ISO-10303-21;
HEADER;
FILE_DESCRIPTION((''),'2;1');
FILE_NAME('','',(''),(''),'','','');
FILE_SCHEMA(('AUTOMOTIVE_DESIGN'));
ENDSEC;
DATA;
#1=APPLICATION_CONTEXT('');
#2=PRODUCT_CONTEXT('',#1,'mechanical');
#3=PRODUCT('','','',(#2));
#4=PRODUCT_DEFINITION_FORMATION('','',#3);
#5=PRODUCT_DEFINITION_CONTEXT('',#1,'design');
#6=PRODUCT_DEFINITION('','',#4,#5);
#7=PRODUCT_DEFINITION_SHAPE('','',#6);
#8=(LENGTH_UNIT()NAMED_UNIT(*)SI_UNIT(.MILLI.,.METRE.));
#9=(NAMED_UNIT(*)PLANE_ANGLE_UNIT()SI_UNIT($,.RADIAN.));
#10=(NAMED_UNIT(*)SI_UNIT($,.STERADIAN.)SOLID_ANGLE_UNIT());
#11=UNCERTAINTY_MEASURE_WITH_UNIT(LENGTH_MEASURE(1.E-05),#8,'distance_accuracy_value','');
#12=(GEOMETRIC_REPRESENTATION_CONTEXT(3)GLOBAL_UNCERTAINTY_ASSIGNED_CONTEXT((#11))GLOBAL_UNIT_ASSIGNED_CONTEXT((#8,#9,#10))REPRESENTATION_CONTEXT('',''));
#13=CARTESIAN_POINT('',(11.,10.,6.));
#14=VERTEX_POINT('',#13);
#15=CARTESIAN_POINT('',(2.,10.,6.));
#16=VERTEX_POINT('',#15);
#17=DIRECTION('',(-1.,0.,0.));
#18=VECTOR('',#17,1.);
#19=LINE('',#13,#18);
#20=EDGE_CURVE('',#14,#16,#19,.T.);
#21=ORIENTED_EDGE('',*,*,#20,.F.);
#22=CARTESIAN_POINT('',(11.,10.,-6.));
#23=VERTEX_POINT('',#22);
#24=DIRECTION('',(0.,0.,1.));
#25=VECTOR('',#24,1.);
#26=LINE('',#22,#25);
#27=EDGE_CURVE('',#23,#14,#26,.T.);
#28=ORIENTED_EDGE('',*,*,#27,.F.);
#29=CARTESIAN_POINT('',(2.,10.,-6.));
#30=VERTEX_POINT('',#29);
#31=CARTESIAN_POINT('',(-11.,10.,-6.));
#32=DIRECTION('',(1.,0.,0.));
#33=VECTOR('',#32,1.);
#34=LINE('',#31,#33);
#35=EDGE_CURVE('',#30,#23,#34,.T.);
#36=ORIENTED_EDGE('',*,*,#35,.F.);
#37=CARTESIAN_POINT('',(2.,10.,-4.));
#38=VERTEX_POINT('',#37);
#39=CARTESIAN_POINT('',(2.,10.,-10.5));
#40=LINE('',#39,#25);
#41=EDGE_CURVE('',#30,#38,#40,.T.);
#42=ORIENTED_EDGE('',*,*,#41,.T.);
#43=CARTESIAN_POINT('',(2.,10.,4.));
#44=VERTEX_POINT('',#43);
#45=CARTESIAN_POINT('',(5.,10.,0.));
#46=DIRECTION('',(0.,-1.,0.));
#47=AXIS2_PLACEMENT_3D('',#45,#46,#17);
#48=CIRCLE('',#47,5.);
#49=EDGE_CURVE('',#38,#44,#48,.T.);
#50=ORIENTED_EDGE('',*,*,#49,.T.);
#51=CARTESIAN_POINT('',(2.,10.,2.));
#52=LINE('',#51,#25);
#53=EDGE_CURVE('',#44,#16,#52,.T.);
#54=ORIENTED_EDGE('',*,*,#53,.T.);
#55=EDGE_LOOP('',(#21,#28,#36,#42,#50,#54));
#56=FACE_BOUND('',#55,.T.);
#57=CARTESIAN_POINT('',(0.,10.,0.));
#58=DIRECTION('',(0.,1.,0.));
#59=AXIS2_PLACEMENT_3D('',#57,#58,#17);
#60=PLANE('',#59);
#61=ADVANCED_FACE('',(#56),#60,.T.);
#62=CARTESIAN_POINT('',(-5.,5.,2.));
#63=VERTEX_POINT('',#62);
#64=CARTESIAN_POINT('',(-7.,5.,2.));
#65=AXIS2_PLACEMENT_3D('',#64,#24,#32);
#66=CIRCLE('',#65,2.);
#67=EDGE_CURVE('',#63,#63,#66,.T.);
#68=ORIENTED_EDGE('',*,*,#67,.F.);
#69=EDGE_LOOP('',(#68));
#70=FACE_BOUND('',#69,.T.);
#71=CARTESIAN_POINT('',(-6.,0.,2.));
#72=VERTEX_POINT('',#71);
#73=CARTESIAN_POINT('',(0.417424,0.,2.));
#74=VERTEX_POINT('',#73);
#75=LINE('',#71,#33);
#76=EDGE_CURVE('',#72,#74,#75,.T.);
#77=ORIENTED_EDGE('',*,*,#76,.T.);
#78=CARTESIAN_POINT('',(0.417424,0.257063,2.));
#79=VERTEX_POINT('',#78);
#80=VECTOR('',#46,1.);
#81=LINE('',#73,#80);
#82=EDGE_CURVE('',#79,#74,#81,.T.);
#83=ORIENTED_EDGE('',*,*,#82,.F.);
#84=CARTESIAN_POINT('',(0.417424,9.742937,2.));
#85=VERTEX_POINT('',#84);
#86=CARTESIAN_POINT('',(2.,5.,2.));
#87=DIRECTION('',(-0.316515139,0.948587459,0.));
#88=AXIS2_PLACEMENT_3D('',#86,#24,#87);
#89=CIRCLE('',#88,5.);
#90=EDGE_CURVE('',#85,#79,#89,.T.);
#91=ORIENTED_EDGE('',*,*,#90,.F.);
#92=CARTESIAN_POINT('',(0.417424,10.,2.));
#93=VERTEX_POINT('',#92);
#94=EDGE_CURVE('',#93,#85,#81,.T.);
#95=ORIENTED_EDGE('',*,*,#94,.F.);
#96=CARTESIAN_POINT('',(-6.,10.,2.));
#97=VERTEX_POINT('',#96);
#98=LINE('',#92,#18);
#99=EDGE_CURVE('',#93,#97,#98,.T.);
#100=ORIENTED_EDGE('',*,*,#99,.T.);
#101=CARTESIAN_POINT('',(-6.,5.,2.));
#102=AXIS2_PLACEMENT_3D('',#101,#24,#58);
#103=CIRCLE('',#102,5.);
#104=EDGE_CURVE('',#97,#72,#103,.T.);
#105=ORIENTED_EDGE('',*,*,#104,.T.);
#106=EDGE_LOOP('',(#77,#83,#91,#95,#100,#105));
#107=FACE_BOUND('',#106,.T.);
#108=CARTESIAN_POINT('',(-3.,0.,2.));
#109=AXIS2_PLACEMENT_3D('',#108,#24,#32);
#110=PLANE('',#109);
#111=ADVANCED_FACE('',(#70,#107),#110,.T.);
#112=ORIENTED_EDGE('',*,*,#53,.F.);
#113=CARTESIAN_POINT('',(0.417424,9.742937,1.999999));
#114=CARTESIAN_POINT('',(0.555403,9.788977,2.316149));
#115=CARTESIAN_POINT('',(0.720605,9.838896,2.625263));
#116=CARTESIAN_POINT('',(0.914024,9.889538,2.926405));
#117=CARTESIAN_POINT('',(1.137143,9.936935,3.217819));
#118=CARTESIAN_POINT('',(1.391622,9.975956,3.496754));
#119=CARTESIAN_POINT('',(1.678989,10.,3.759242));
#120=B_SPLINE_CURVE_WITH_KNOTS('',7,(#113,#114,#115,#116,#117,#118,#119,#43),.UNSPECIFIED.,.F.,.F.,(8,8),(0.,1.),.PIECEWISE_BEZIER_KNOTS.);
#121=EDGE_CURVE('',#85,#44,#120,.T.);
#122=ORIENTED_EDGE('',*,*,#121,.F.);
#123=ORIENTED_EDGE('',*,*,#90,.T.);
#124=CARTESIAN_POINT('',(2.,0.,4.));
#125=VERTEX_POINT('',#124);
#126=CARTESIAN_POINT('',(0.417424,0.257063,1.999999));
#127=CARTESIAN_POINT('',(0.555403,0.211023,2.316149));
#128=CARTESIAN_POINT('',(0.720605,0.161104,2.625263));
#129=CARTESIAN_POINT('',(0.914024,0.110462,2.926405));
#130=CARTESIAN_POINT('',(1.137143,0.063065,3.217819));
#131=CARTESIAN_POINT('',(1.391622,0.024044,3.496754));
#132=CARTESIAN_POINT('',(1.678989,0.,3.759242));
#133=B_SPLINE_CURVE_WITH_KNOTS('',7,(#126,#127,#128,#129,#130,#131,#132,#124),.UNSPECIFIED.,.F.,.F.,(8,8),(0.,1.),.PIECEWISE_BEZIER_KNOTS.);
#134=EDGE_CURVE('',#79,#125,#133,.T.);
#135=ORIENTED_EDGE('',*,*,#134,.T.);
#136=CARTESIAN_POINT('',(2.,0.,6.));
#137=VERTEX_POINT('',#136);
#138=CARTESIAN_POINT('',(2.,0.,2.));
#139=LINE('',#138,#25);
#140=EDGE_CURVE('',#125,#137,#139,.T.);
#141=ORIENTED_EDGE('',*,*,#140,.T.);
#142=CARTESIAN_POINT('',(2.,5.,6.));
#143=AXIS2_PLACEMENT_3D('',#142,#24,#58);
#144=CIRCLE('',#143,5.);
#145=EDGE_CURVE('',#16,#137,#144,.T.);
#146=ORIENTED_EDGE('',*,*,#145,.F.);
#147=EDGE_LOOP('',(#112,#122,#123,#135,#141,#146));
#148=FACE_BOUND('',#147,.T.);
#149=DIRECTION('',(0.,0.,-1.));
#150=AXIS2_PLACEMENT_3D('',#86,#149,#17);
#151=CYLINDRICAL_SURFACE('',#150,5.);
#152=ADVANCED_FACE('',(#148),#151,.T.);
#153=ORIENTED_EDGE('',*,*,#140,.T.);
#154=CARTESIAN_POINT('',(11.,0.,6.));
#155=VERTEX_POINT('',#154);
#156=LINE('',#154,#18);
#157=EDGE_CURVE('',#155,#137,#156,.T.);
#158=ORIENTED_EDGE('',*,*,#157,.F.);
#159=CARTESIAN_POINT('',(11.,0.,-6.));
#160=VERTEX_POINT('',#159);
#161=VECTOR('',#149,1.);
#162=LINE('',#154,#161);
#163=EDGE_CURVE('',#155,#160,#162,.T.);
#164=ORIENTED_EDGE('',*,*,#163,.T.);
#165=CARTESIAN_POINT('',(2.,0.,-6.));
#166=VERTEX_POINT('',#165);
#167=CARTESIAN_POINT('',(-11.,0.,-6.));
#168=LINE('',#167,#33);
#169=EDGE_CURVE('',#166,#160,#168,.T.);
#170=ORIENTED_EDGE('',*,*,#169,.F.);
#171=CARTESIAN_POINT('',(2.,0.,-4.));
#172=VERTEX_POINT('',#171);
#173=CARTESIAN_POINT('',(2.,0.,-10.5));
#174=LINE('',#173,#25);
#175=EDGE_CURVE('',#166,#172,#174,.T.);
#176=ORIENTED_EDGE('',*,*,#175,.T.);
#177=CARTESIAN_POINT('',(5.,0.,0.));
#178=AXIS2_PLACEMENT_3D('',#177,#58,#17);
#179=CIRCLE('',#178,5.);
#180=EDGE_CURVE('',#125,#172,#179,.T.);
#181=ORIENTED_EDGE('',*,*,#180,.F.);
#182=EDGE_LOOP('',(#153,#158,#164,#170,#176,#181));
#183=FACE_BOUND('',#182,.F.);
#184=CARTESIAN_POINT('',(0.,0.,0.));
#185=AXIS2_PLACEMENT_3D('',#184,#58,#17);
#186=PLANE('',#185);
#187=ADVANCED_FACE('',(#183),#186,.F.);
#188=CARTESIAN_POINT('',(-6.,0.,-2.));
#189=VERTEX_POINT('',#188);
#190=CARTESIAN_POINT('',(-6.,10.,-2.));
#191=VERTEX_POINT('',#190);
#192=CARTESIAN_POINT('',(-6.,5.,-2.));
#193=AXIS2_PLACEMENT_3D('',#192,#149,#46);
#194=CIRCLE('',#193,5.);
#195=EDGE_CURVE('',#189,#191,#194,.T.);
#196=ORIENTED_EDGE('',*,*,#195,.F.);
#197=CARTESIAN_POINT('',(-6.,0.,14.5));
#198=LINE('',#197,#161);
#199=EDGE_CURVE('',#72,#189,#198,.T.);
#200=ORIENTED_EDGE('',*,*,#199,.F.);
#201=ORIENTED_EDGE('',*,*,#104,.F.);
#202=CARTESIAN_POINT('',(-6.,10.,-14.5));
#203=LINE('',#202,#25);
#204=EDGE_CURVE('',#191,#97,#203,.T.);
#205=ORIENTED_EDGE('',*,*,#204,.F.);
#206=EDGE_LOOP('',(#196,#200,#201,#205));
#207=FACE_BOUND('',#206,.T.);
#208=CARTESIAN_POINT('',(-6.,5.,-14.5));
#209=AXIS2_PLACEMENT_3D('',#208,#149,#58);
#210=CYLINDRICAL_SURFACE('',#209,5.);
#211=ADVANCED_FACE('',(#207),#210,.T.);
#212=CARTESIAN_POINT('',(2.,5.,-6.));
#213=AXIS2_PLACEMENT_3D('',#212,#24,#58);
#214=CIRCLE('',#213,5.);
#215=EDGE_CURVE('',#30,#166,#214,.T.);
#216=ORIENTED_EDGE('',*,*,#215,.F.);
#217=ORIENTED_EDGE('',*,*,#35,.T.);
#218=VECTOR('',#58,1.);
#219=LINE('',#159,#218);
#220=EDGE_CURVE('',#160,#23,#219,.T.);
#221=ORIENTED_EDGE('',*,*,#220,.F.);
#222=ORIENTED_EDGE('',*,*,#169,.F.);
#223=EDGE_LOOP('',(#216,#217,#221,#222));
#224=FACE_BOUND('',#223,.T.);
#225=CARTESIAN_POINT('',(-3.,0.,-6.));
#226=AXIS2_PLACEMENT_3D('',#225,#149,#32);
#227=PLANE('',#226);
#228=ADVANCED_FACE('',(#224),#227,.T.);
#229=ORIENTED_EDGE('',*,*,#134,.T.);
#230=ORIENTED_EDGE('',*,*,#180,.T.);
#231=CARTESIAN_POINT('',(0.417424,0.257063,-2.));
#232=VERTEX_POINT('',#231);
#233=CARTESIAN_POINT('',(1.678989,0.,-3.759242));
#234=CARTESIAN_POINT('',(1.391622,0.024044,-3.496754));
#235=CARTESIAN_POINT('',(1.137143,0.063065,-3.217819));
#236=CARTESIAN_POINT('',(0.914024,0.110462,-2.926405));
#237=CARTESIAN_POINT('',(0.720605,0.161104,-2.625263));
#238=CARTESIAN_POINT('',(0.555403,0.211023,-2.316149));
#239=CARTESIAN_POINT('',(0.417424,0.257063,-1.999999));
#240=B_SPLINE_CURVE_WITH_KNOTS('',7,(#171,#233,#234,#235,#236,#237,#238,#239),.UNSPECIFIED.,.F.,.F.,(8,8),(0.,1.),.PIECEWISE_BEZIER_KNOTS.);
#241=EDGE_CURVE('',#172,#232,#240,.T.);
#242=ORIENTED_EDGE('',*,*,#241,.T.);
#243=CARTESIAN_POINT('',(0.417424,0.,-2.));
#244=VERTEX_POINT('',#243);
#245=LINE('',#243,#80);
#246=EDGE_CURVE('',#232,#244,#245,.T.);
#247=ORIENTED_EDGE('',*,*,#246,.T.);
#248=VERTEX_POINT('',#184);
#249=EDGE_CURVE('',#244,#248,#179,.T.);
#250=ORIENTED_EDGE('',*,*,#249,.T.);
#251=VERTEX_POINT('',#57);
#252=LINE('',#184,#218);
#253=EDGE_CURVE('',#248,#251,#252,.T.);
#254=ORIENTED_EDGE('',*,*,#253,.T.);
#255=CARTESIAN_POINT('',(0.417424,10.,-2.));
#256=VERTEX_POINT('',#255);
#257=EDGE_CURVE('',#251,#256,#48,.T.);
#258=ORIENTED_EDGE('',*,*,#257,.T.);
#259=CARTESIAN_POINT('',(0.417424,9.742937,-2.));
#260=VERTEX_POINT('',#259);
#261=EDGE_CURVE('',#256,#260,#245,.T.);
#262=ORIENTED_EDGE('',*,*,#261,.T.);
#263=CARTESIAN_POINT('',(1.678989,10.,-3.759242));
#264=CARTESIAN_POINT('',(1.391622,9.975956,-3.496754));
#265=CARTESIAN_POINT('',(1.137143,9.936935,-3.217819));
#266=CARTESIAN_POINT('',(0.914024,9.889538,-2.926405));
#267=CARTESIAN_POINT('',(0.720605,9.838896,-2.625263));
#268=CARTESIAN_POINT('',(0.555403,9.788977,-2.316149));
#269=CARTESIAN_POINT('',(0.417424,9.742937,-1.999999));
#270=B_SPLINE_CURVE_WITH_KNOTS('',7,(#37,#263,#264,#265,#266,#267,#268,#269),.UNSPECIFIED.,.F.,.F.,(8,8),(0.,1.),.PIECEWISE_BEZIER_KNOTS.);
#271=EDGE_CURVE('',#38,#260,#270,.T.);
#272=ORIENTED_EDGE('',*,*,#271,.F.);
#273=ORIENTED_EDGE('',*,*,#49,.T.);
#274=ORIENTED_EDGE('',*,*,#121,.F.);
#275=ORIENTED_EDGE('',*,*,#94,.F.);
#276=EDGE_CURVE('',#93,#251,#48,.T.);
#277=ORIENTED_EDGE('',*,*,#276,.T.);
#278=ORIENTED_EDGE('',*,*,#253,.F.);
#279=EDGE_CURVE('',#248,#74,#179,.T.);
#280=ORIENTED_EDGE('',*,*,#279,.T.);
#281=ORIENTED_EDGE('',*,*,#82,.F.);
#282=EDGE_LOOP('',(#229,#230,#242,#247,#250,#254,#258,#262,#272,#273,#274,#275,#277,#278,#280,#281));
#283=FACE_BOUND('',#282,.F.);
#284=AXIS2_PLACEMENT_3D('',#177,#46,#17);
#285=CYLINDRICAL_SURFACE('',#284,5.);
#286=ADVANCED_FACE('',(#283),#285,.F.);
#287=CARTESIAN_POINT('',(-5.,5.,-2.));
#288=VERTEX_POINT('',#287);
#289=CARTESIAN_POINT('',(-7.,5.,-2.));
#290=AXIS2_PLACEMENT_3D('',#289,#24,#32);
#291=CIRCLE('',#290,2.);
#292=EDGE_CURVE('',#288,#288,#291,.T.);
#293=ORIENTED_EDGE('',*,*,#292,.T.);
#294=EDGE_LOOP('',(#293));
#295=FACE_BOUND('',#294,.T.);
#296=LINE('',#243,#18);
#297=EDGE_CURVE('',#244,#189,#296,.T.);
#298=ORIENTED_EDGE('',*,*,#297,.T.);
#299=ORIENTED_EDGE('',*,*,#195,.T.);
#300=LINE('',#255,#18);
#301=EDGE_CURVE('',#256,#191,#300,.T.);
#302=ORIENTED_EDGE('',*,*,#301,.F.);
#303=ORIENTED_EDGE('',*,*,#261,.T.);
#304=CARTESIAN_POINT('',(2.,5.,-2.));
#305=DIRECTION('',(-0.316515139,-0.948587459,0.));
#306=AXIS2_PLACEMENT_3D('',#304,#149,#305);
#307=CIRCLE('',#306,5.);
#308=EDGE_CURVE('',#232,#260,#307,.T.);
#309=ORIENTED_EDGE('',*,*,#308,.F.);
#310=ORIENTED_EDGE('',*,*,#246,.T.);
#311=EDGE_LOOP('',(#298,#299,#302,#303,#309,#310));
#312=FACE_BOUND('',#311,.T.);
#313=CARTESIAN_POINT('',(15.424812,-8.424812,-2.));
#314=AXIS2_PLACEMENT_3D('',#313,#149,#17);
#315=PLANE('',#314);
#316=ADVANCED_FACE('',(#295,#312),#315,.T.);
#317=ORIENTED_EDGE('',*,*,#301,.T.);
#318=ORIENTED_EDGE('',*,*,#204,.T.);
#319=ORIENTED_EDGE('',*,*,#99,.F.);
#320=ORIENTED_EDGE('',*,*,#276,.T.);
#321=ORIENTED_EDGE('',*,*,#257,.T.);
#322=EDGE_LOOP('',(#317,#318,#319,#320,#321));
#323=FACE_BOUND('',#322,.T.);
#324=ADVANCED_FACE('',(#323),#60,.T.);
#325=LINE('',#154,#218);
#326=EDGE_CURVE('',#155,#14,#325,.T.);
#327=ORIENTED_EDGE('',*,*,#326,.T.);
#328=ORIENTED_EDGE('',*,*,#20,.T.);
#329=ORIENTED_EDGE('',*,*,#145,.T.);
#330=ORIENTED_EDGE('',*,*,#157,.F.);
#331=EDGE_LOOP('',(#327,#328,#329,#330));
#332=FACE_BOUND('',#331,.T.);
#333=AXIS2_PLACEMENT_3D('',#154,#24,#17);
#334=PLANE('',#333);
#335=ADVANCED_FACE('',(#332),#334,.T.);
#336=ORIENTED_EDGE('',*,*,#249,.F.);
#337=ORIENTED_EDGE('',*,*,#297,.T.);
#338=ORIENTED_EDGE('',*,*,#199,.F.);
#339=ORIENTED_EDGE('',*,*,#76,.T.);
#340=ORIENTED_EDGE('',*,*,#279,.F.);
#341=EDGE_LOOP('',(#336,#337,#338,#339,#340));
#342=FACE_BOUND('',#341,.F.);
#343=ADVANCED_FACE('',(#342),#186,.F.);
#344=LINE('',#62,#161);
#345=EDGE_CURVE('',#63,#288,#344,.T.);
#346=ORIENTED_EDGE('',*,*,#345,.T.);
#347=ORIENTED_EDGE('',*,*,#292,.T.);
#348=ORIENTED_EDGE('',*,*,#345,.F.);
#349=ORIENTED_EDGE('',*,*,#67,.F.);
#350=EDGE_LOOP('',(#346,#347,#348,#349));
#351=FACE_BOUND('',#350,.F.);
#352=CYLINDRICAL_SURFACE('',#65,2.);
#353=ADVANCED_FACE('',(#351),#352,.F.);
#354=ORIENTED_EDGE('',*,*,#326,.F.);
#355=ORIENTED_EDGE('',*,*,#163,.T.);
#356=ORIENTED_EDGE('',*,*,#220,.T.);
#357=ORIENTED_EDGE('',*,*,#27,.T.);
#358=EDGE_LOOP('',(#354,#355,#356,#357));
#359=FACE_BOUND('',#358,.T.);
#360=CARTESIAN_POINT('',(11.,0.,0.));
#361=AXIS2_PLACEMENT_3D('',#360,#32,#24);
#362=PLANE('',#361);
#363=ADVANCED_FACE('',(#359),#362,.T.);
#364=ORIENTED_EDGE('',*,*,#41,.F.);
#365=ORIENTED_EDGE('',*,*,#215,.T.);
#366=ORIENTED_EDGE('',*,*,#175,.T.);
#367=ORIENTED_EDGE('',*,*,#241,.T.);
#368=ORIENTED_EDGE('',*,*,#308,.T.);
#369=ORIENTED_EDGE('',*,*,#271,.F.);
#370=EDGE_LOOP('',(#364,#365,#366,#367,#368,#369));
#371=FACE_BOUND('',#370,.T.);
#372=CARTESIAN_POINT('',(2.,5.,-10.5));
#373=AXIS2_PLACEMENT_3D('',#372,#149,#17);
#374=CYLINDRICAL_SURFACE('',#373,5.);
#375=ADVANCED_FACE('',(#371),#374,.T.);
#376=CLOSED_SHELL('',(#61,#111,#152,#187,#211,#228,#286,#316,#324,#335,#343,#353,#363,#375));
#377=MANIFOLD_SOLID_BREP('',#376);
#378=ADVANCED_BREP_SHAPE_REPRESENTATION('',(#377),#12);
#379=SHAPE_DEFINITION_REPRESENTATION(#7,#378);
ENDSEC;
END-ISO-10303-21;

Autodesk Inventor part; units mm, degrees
ref_plane "YZ Plane" through (0, 0, 0) normal (1, 0, 0) x (0, 1, 0)
ref_plane "XZ Plane" through (0, 0, 0) normal (0, 1, 0) x (-1, 0, 0)
ref_plane "XY Plane" through (0, 0, 0) normal (0, 0, 1) x (1, 0, 0)
sketch "Szkic2" plane through (0, 0, 0) normal (0, 1, 0) x (-1, 0, 0)
  line L0 (-11, 6) -> (11, 6)
  line L1 (11, 6) -> (11, -6)
  line L2 (11, -6) -> (-11, -6)
  line L3 (-11, -6) -> (-11, 6)
  line L4 (-11, 6) -> (11, -6) construction
  line L5 (11, 6) -> (-11, -6) construction
  line L6 (-11, 0) -> (-5, 0)
  circle A0 centre (-5, 0) radius 5
  line L7 (11, 0) -> (11, 2)
  line L8 (11, 2) -> (3, 2)
  line L9 (3, 2) -> (3, 6)
  line L10 (11, -6) -> (11, 6)
  line L11 (11, -2) -> (3, -2)
  line L12 (3, -2) -> (3, -6)
  point P0 (0, 0)
  point P1 (3, -6)
  point P2 (11, -2)
  dimension "d11" = 22
  dimension "d12" = 12
  dimension "d13" = 6
  dimension "d14" = 10
  dimension "d15" = 2
  dimension "d16" = 8
extrude "Wyciągnięcie proste3" add sketch "Szkic2" along normal blind 10 contours L0 L9 L8 L1 L11 L12 L2 L3
sketch "Szkic3" plane through (-11, 0, 2) normal (0, 0, 1) x (1, 0, 0)
  line L0 (0, 0) -> (0, 10) projected
  line L1 (8, 0) -> (0, 0) projected
  line L2 (0, 10) -> (0, 0)
  line L3 (8, 0) -> (8, 10) projected
  circle A0 centre (4, 5) radius 2
  point P0 (11, 0)
  dimension "d19" = 4
  dimension "d23" = 4
extrude "Wyciągnięcie proste4" cut sketch "Szkic3" against normal blind 32.75
fillet "Zaokrąglenie1" radius 5 6 edges at (-11, 0, 0) (-11, 10, 0) (-3, 0, 4) (-3, 10, 4) (-3, 0, -4) (-3, 10, -4)
properties part number "Knee"
